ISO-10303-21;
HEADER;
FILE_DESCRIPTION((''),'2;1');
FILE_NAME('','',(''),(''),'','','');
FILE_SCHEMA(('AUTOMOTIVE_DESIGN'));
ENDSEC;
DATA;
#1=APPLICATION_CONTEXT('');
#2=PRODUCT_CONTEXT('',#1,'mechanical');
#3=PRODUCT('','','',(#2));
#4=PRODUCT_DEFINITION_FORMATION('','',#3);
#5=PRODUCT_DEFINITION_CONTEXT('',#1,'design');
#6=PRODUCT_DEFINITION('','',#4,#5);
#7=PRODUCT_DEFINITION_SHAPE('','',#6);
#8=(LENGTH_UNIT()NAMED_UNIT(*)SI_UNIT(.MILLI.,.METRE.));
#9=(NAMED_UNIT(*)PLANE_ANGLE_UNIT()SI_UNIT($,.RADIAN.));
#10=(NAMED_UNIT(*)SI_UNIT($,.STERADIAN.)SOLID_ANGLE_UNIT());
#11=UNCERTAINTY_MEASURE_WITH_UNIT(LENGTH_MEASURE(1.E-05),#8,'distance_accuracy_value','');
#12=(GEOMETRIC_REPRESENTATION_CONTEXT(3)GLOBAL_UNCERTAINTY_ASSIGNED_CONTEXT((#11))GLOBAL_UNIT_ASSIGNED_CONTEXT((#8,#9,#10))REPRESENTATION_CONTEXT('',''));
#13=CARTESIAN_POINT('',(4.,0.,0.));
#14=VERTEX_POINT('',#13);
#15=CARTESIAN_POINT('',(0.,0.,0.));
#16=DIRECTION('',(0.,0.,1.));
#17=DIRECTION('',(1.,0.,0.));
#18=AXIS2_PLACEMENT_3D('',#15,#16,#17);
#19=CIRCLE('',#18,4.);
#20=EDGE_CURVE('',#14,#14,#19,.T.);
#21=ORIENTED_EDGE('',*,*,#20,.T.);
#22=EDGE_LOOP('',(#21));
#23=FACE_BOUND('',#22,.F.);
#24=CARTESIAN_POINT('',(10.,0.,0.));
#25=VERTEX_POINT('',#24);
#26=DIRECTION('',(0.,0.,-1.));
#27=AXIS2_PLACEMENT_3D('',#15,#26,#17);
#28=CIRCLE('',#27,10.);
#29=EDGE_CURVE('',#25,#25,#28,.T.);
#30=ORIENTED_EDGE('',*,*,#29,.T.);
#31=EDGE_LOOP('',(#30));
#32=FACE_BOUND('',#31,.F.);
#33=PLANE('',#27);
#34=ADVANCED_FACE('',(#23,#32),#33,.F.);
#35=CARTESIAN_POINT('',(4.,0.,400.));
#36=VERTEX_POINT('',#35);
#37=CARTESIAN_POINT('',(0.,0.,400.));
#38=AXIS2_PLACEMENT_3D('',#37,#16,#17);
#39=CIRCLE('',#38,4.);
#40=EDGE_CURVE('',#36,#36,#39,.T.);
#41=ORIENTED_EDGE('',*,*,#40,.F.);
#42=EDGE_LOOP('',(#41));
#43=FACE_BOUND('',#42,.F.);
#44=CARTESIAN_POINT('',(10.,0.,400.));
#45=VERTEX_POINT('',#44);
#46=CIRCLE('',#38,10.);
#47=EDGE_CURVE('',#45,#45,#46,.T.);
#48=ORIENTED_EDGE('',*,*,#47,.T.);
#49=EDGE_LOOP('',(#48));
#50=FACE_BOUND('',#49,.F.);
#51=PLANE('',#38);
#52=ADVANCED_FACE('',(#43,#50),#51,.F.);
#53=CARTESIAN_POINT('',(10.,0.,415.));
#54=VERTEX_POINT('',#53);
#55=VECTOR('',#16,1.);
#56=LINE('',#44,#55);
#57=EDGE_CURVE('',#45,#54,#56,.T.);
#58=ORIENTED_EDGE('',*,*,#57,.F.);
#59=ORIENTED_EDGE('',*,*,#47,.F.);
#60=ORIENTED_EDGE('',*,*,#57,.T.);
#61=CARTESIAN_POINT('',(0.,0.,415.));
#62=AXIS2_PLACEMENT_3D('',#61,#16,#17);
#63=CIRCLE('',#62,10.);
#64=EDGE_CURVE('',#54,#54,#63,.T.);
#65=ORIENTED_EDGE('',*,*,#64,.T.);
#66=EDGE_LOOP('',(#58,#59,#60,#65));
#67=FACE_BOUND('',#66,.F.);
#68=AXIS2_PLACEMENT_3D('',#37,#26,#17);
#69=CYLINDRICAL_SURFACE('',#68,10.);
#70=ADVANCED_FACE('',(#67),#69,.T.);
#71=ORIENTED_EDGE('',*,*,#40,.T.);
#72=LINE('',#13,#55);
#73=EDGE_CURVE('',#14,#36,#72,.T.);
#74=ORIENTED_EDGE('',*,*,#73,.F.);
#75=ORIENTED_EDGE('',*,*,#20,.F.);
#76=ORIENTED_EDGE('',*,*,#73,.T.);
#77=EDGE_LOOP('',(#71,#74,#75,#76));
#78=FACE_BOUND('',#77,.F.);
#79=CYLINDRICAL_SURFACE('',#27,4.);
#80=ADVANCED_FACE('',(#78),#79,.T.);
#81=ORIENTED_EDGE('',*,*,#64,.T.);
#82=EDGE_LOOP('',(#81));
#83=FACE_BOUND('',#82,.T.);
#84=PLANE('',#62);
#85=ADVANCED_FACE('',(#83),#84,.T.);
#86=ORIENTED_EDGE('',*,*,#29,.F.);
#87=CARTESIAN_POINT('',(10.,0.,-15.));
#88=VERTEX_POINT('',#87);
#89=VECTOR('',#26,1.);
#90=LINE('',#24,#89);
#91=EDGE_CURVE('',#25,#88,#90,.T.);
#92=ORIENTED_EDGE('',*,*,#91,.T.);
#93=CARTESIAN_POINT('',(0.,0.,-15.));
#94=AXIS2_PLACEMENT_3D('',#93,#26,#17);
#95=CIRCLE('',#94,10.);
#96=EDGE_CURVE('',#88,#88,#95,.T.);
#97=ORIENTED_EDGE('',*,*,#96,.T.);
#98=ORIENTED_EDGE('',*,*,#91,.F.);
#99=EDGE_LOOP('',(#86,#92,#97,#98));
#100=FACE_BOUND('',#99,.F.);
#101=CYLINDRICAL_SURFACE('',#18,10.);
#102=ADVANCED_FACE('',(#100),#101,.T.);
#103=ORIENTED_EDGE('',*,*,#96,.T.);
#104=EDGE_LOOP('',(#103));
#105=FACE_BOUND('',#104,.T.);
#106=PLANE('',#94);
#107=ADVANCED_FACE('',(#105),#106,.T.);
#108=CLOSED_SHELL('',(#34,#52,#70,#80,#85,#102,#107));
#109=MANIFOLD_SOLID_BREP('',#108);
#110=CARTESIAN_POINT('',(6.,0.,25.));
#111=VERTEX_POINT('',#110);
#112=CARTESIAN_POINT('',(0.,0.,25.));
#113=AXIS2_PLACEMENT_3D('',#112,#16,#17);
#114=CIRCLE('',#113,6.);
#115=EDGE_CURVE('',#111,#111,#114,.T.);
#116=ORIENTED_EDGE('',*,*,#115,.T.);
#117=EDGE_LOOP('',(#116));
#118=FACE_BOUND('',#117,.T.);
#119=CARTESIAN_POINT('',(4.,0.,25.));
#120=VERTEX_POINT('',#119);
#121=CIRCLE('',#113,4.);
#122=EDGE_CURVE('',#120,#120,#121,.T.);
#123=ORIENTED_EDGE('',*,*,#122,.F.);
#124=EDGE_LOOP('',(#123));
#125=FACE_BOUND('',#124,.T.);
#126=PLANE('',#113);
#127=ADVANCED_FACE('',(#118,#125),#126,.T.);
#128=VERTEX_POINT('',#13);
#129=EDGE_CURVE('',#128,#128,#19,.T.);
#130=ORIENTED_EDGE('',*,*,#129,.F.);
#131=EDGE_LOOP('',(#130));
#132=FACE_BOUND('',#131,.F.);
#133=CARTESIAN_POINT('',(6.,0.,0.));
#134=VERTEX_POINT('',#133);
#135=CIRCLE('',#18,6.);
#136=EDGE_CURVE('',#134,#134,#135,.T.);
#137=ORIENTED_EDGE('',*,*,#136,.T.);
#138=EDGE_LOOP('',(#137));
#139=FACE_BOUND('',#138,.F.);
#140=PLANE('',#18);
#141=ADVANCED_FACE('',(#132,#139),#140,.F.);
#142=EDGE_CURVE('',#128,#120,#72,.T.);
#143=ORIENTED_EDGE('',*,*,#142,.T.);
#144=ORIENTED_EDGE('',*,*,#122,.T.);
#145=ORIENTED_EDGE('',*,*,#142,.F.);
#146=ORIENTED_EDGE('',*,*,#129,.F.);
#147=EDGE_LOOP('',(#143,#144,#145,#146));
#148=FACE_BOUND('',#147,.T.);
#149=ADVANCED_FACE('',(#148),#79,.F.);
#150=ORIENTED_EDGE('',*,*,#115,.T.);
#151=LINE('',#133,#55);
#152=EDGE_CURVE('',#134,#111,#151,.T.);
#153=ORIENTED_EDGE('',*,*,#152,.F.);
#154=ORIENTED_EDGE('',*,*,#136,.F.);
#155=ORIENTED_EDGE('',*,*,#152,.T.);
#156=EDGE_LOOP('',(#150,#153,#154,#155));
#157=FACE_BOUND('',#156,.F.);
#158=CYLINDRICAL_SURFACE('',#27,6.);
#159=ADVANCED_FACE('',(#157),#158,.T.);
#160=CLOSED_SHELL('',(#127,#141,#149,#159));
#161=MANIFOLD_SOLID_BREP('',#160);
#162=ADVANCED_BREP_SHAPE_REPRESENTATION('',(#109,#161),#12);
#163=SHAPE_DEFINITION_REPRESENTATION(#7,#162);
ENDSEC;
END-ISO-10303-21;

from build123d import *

# Parameters (mm, degrees)
F0_R     = 6
F0_R_2   = 4
F1_DEPTH = 25
F2_R     = 4
F3_DEPTH = 400
F4_R     = 10
F5_DEPTH = 15
F6_R     = 10
F7_DEPTH = 15


with BuildPart() as f1:
    # F0 (on Top) → F1 (new body)
    with BuildSketch(Plane.XY):
        Circle(F0_R)
        Circle(F0_R_2, mode=Mode.SUBTRACT)
    extrude(amount=F1_DEPTH)


with BuildPart() as f3:
    # F2 (on Top) → F3 (new body)
    with BuildSketch(Plane.XY):
        Circle(F2_R)
    extrude(amount=F3_DEPTH)

    # F4 (on face) → F5 (join)
    with BuildSketch(Plane.XY.offset(400)):
        Circle(F4_R)
    extrude(amount=F5_DEPTH)

    # F6 (on face) → F7 (join)
    with BuildSketch(Plane(origin=(0, 0, 0), x_dir=(1, 0, 0), z_dir=(0, 0, -1))):
        Circle(F6_R)
    extrude(amount=F7_DEPTH)


solid = Compound([f1.part, f3.part])
